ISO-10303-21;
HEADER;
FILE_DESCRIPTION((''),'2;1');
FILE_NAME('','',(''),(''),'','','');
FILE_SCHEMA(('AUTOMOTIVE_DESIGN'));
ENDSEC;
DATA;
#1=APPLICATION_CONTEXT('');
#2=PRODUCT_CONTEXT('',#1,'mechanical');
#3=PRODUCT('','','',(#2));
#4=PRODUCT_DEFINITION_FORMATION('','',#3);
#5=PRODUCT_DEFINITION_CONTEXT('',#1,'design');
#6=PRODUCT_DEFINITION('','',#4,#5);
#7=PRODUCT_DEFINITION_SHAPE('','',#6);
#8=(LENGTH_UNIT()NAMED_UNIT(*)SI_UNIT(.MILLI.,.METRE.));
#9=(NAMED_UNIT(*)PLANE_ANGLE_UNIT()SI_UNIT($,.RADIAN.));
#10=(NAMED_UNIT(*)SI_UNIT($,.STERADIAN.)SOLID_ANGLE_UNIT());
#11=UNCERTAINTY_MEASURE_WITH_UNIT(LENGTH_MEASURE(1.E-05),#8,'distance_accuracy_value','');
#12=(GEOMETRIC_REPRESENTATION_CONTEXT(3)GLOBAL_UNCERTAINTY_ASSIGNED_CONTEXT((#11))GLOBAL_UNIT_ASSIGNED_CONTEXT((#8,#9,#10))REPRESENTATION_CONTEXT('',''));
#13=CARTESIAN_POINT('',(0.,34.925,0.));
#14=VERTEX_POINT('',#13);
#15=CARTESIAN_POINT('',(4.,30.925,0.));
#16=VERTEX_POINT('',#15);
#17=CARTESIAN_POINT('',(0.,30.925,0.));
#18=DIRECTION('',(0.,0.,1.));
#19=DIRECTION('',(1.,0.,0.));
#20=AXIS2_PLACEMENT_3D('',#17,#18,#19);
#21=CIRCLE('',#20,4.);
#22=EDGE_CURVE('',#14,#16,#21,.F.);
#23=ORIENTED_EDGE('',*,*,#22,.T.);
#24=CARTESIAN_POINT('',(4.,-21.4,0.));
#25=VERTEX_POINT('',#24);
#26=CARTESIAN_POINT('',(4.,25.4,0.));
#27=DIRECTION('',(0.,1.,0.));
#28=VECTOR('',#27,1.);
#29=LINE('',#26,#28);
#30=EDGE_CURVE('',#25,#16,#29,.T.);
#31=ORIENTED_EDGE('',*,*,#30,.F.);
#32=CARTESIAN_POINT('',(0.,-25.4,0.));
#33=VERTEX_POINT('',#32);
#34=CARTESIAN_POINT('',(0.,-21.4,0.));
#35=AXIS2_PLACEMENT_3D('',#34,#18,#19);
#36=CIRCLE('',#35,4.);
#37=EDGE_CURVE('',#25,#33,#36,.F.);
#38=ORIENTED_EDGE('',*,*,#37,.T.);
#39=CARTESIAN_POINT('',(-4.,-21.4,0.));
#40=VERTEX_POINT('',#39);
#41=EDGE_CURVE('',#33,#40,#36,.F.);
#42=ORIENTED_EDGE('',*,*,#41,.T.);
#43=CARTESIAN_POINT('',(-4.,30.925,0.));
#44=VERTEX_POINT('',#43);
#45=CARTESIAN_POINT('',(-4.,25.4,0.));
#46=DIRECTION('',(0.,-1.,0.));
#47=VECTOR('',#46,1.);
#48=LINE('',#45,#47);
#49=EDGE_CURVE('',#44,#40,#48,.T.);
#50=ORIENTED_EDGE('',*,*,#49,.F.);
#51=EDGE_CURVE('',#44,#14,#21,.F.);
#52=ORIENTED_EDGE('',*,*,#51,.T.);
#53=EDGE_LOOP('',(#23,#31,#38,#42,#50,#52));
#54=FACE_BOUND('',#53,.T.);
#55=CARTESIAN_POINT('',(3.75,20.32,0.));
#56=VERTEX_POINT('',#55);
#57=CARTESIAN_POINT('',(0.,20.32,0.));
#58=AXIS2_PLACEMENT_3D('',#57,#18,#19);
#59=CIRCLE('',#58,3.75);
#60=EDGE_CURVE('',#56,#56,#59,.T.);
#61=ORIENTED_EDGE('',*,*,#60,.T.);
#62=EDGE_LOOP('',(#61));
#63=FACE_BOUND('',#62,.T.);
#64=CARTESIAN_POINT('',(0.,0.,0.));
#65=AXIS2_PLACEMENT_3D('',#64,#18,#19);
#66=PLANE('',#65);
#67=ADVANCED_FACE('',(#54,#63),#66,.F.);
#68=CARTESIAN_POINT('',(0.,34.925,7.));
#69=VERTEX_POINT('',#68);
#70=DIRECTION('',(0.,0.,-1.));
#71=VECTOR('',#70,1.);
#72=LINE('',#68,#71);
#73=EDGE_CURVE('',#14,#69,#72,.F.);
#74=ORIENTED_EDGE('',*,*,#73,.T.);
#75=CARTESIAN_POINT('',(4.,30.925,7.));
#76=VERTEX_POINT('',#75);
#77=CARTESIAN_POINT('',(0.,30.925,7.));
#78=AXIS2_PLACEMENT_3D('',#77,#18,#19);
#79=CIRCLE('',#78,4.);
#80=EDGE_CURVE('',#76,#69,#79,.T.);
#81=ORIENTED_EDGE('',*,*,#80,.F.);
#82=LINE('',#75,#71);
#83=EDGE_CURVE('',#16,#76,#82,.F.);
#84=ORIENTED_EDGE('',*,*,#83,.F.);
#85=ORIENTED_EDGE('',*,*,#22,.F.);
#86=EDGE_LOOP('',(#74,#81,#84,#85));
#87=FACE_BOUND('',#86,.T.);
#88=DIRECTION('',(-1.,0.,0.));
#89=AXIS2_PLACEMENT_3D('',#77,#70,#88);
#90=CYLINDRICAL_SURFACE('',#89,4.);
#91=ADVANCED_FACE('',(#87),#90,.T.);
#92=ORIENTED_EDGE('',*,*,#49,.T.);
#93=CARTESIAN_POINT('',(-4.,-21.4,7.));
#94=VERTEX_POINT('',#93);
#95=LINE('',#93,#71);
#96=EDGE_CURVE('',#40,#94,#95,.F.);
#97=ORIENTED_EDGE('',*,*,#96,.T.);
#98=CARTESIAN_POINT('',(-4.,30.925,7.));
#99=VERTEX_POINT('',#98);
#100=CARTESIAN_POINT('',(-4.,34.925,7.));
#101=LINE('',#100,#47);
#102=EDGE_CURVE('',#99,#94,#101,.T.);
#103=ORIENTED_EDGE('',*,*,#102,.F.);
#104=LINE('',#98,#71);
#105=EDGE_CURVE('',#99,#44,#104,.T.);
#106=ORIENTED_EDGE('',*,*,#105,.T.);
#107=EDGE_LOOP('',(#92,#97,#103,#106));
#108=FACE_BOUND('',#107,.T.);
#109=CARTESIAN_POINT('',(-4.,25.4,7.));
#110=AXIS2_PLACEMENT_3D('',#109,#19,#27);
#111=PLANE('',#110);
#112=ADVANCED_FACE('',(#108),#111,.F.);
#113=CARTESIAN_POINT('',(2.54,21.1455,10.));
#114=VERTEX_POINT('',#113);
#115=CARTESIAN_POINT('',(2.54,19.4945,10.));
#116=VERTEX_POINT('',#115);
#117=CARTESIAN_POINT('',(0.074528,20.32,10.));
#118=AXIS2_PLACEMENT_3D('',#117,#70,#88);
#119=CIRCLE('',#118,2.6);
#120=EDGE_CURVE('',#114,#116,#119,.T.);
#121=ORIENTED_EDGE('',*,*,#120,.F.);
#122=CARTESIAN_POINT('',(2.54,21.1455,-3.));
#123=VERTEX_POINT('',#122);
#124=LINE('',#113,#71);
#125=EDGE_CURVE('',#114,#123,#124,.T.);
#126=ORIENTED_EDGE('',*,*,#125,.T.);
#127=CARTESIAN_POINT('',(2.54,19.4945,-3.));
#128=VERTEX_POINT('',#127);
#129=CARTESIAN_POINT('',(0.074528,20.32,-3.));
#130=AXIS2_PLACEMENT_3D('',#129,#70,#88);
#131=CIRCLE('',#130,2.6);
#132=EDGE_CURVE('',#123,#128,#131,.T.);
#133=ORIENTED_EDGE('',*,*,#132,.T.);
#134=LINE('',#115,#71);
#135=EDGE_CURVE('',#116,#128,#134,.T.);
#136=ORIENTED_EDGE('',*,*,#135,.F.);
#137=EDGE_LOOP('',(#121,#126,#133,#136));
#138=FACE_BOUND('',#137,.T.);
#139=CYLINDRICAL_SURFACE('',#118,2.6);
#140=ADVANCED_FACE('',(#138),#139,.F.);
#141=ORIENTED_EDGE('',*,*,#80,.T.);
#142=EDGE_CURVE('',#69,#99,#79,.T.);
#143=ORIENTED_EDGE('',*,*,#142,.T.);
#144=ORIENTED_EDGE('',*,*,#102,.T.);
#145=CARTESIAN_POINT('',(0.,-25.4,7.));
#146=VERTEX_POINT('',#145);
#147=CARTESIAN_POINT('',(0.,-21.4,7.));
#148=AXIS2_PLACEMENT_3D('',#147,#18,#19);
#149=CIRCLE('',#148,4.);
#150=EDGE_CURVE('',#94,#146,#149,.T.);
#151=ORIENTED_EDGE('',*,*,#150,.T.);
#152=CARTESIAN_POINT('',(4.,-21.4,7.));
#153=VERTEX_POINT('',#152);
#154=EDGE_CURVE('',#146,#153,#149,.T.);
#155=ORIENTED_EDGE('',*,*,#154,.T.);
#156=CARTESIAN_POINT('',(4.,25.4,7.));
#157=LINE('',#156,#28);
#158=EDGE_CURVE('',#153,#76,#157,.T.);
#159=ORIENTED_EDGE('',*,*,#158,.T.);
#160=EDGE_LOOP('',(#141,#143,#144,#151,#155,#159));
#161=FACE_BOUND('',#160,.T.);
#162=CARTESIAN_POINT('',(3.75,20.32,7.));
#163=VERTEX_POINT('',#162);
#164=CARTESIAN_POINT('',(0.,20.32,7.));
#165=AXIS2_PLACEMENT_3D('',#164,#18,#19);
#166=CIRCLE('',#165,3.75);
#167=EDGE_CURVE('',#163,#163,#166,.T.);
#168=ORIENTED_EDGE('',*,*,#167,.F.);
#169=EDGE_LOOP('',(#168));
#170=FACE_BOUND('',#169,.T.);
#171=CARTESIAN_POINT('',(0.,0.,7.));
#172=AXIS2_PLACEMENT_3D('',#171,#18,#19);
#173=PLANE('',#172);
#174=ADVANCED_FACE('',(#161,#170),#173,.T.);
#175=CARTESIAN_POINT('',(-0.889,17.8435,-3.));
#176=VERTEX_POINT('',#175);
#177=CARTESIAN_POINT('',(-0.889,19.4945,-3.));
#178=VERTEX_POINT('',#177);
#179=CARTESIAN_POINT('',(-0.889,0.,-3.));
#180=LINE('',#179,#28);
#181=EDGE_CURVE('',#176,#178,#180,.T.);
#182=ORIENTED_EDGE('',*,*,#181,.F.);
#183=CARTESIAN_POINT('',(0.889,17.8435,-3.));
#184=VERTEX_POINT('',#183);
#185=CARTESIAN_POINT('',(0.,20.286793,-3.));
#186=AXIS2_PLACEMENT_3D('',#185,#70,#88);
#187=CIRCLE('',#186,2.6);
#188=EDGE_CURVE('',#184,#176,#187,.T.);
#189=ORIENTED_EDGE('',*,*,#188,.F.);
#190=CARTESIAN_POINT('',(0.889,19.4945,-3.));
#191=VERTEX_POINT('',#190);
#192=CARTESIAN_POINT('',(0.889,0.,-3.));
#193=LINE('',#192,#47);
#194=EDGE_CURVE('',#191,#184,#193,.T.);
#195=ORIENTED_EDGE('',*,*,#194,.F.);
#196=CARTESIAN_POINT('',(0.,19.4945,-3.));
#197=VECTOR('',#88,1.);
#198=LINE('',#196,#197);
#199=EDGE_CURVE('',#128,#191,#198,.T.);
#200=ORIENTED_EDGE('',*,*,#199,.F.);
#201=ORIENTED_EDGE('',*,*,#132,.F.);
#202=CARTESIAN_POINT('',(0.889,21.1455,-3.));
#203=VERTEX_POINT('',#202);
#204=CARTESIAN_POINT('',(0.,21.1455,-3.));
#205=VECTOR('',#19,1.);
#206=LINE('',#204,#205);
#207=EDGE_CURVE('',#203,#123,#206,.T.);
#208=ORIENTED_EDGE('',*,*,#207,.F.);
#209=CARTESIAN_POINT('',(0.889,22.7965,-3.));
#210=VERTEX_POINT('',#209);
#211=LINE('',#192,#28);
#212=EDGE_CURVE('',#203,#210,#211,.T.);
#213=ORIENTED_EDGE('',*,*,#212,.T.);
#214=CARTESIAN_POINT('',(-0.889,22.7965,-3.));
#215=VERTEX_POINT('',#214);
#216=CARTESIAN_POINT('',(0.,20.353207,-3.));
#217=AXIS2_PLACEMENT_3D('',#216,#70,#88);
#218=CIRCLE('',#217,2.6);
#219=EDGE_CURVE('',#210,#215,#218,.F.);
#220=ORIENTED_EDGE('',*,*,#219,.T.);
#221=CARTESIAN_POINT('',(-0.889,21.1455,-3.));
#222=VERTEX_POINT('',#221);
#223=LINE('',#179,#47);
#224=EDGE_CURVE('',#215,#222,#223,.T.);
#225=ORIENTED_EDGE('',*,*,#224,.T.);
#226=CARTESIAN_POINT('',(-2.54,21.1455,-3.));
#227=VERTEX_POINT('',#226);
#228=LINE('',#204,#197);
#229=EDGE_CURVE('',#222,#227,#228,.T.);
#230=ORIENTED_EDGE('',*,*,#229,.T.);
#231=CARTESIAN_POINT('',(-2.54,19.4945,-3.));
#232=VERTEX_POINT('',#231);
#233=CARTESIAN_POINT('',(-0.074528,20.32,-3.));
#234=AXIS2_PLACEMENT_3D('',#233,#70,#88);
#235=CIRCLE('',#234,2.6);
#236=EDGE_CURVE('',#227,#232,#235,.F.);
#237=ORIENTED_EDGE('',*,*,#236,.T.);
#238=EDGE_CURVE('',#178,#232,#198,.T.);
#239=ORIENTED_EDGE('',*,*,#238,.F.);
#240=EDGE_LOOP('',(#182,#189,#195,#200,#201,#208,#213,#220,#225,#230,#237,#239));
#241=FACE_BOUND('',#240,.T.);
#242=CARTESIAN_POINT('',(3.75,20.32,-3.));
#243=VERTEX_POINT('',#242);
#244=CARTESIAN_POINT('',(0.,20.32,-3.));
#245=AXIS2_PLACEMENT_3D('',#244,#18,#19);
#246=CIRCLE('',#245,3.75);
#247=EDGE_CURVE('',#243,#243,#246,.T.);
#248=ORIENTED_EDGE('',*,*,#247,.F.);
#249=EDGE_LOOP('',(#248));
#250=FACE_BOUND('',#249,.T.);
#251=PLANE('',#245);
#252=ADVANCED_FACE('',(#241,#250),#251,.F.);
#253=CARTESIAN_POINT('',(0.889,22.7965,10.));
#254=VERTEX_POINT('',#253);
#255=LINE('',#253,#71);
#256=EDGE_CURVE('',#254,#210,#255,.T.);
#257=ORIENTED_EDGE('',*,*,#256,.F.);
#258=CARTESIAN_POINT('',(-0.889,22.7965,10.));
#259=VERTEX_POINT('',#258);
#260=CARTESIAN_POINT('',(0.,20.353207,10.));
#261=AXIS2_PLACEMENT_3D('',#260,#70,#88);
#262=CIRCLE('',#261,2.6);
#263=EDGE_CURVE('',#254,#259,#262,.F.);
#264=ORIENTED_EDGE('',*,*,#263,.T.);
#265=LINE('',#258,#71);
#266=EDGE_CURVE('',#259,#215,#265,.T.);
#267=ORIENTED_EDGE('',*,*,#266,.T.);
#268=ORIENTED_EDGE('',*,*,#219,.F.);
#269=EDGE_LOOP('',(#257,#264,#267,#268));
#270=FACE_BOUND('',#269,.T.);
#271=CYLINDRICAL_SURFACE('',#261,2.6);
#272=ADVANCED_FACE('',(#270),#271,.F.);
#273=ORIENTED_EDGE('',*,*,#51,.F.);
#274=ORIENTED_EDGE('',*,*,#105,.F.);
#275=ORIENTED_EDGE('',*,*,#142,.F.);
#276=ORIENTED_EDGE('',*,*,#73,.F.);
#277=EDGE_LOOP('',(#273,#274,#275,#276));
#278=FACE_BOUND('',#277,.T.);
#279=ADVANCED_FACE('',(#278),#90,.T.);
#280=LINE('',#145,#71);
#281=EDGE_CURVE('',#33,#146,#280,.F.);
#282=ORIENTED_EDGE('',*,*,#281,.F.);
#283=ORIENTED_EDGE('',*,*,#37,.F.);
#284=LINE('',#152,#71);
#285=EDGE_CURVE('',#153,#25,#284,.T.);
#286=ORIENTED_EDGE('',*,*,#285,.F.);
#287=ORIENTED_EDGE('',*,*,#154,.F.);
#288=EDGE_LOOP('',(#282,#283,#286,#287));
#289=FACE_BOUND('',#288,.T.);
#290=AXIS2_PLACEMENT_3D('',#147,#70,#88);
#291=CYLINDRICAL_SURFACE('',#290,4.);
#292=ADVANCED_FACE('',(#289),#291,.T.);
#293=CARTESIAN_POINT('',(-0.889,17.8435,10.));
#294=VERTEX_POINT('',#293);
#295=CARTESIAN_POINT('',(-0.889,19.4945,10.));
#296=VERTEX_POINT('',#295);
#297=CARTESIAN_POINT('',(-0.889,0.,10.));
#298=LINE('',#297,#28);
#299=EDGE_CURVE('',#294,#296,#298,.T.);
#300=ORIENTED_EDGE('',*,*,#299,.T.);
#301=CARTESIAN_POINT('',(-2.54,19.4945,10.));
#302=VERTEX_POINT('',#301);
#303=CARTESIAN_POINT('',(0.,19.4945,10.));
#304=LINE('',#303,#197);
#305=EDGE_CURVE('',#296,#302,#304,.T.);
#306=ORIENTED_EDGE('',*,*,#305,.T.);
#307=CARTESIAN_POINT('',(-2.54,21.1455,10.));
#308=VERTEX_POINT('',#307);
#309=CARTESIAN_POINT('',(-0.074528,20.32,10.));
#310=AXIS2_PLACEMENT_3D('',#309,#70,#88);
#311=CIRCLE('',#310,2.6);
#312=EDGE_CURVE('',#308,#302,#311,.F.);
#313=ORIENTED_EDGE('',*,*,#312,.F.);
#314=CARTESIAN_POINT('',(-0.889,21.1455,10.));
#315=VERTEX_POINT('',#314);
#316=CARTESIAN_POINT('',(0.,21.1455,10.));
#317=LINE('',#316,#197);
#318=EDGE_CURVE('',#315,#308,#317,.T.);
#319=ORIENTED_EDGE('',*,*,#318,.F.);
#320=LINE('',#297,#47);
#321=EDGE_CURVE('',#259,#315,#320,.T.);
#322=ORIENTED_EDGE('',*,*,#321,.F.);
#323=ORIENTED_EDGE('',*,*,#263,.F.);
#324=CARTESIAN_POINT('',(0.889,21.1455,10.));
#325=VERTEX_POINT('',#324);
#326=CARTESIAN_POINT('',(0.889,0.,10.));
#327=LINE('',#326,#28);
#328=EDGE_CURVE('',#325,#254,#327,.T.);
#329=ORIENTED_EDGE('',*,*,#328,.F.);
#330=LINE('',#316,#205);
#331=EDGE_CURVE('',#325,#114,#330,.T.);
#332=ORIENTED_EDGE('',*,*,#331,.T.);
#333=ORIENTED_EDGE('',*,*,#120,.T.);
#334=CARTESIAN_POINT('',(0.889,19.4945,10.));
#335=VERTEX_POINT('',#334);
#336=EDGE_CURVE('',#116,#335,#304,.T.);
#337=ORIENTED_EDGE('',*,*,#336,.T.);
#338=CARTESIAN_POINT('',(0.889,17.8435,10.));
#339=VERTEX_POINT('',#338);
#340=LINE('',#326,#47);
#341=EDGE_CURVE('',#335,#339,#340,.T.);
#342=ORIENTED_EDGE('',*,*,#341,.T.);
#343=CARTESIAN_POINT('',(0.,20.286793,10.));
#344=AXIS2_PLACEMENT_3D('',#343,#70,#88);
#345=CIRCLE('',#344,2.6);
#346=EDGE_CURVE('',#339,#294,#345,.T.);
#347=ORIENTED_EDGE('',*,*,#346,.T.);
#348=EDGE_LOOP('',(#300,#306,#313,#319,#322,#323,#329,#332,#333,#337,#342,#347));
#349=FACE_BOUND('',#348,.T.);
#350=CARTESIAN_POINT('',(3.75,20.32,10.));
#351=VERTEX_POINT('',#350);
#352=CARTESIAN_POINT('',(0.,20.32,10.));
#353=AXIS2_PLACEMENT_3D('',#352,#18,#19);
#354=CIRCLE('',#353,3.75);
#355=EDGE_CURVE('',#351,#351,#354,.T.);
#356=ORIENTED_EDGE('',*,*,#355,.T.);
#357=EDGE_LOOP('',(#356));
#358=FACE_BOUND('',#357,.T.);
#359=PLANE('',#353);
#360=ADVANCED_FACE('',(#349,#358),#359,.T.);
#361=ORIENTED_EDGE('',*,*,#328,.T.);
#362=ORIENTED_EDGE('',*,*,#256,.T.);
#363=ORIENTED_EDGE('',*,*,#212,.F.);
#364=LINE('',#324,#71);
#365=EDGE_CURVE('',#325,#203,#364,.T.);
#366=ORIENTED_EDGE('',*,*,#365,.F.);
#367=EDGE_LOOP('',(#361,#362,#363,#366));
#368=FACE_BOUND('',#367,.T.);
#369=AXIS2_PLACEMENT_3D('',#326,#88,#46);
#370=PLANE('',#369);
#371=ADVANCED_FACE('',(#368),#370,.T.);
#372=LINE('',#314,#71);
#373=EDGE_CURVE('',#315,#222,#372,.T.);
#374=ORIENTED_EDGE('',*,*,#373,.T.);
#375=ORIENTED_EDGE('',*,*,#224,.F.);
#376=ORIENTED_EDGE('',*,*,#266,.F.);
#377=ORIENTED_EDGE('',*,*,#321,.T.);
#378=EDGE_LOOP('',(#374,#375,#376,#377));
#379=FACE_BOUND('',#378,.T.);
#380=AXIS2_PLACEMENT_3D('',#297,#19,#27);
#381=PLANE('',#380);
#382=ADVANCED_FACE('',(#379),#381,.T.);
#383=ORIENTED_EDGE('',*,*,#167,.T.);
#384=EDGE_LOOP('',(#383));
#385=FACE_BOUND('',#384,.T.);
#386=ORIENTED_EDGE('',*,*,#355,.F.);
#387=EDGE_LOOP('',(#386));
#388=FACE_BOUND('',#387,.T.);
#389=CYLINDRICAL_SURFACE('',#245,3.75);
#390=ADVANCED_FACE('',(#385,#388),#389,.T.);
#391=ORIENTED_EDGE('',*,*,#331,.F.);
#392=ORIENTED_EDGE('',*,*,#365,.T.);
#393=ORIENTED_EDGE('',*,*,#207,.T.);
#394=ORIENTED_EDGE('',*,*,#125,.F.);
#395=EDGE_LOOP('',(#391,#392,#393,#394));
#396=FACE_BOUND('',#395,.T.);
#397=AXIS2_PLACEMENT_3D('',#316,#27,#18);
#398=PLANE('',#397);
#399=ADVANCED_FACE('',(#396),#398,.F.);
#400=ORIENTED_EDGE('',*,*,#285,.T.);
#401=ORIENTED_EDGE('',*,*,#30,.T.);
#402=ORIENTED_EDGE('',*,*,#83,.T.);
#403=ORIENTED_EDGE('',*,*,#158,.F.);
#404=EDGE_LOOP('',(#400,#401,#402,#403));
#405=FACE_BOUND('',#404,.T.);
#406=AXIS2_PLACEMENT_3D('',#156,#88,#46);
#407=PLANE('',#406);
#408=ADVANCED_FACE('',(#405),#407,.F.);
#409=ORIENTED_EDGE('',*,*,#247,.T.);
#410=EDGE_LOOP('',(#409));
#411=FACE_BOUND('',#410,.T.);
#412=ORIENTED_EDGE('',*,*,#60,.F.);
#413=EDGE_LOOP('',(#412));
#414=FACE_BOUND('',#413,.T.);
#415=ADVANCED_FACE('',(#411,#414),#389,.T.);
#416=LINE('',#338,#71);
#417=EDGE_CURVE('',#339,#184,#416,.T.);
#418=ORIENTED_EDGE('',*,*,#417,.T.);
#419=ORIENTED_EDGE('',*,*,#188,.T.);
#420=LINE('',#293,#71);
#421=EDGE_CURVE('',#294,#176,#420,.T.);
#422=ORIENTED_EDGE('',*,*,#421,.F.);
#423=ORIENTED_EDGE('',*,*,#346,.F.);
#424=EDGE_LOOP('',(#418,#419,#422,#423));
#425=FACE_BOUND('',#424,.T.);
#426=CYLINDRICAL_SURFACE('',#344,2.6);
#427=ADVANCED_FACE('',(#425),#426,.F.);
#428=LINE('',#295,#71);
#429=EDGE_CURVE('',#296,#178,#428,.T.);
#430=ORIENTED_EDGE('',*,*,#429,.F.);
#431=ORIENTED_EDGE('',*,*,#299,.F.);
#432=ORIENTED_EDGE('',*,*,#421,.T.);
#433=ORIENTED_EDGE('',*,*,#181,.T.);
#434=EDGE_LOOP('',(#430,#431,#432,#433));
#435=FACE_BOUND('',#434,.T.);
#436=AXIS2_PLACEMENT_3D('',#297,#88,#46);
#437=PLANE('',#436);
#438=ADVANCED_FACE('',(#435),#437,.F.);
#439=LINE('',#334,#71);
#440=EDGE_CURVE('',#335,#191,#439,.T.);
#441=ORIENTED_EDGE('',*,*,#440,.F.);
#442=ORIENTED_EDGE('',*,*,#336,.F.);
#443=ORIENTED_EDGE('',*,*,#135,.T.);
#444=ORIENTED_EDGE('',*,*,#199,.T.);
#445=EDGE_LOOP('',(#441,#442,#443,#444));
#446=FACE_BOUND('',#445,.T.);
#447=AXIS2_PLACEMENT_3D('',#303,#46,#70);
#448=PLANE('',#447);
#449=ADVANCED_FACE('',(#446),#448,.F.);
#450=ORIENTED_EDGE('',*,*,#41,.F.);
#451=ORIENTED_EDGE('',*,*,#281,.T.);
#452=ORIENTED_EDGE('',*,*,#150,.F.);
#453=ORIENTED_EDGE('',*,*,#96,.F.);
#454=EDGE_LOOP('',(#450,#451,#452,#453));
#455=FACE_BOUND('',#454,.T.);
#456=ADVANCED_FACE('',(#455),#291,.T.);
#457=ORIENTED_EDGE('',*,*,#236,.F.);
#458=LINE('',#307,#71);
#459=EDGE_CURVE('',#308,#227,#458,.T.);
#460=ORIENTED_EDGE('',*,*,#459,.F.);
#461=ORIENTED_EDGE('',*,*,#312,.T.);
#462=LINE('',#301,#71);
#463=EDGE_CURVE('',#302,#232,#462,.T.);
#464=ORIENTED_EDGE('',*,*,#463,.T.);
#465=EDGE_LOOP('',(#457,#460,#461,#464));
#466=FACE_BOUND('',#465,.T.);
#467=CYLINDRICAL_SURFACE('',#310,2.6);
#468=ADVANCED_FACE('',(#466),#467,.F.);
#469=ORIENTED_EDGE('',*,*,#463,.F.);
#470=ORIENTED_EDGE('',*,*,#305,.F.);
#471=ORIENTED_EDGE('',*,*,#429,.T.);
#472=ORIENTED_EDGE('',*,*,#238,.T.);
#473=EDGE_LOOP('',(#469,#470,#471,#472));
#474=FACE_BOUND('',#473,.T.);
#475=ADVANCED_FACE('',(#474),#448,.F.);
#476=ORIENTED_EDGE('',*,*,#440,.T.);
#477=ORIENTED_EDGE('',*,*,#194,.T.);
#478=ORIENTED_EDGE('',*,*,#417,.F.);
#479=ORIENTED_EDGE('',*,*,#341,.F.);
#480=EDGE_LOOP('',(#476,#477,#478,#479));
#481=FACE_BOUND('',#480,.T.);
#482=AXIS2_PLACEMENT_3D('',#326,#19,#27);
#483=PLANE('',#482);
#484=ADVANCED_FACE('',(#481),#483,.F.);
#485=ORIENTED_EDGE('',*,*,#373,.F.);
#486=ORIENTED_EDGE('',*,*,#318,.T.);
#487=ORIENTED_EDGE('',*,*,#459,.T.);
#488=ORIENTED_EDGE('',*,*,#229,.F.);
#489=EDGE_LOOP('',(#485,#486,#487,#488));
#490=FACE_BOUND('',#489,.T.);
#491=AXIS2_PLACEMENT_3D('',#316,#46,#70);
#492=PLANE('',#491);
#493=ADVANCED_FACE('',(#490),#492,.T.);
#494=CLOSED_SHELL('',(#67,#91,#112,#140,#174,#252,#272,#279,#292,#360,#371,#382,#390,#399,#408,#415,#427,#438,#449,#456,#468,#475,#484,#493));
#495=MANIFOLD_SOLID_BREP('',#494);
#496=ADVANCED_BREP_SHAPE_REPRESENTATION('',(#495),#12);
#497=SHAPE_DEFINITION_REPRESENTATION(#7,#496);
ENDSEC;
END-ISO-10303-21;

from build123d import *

# Parameters (mm, degrees)
BOSS_EXTRUDE1_DEPTH      = 7
FILLET1_R                = 4
BOSS_EXTRUDE2_DEPTH      = 3
BOSS_EXTRUDE2_DEPTH_BACK = 9.99999997
SKETCH2_R                = 3.75
CUT_EXTRUDE1_DEPTH       = 38.480069693


with BuildPart() as part:
    # Sketch1 → Boss-Extrude1 (new body)
    with BuildSketch(Plane.XY):
        Polygon((4, 25.4), (4, 34.925), (-4, 34.925), (-4, 25.4), (-4, -25.4), (4, -25.4), align=None)
    extrude(amount=BOSS_EXTRUDE1_DEPTH)

    # Fillet1
    fillet1_edges = [part.edges().sort_by_distance(p)[0] for p in [
        (-4, -25.4, 3.5),
        (4, -25.4, 3.5),
        (4, 34.925, 3.5),
        (-4, 34.925, 3.5),
    ]]
    fillet(fillet1_edges, radius=FILLET1_R - 0.0001)  # a hair under: the kernel refuses the full size

    # Sketch2 → Boss-Extrude2 (add, two sides: drawn at the far end of the back side and taken through both)
    with BuildSketch(Plane.XY.offset(7).offset(-BOSS_EXTRUDE2_DEPTH_BACK)):
        with Locations((0, 20.32)):
            Circle(SKETCH2_R)
    extrude(amount=BOSS_EXTRUDE2_DEPTH + BOSS_EXTRUDE2_DEPTH_BACK)

    # Sketch3 → Cut-Extrude1 (cut, through all)
    with BuildSketch(Plane(origin=(0, 0, -2.99999997), x_dir=(-1, 0, 0), z_dir=(0, 0, -1))):
        with BuildLine():
            Line((-0.889, 21.1455), (-0.889, 22.7965))
            ThreePointArc((-0.889, 22.7965), (0, 22.953207345), (0.889, 22.7965))
            Line((0.889, 22.7965), (0.889, 21.1455))
            Line((0.889, 21.1455), (2.54, 21.1455))
            ThreePointArc((2.54, 21.1455), (2.674528493, 20.32), (2.54, 19.4945))
            Line((2.54, 19.4945), (0.889, 19.4945))
            Line((0.889, 19.4945), (0.889, 17.8435))
            ThreePointArc((0.889, 17.8435), (0, 17.686792655), (-0.889, 17.8435))
            Line((-0.889, 17.8435), (-0.889, 19.4945))
            Line((-0.889, 19.4945), (-2.54, 19.4945))
            ThreePointArc((-2.54, 19.4945), (-2.674528493, 20.32), (-2.54, 21.1455))
            Line((-2.54, 21.1455), (-0.889, 21.1455))
        make_face()
    extrude(amount=-CUT_EXTRUDE1_DEPTH, mode=Mode.SUBTRACT)


solid = part.part
